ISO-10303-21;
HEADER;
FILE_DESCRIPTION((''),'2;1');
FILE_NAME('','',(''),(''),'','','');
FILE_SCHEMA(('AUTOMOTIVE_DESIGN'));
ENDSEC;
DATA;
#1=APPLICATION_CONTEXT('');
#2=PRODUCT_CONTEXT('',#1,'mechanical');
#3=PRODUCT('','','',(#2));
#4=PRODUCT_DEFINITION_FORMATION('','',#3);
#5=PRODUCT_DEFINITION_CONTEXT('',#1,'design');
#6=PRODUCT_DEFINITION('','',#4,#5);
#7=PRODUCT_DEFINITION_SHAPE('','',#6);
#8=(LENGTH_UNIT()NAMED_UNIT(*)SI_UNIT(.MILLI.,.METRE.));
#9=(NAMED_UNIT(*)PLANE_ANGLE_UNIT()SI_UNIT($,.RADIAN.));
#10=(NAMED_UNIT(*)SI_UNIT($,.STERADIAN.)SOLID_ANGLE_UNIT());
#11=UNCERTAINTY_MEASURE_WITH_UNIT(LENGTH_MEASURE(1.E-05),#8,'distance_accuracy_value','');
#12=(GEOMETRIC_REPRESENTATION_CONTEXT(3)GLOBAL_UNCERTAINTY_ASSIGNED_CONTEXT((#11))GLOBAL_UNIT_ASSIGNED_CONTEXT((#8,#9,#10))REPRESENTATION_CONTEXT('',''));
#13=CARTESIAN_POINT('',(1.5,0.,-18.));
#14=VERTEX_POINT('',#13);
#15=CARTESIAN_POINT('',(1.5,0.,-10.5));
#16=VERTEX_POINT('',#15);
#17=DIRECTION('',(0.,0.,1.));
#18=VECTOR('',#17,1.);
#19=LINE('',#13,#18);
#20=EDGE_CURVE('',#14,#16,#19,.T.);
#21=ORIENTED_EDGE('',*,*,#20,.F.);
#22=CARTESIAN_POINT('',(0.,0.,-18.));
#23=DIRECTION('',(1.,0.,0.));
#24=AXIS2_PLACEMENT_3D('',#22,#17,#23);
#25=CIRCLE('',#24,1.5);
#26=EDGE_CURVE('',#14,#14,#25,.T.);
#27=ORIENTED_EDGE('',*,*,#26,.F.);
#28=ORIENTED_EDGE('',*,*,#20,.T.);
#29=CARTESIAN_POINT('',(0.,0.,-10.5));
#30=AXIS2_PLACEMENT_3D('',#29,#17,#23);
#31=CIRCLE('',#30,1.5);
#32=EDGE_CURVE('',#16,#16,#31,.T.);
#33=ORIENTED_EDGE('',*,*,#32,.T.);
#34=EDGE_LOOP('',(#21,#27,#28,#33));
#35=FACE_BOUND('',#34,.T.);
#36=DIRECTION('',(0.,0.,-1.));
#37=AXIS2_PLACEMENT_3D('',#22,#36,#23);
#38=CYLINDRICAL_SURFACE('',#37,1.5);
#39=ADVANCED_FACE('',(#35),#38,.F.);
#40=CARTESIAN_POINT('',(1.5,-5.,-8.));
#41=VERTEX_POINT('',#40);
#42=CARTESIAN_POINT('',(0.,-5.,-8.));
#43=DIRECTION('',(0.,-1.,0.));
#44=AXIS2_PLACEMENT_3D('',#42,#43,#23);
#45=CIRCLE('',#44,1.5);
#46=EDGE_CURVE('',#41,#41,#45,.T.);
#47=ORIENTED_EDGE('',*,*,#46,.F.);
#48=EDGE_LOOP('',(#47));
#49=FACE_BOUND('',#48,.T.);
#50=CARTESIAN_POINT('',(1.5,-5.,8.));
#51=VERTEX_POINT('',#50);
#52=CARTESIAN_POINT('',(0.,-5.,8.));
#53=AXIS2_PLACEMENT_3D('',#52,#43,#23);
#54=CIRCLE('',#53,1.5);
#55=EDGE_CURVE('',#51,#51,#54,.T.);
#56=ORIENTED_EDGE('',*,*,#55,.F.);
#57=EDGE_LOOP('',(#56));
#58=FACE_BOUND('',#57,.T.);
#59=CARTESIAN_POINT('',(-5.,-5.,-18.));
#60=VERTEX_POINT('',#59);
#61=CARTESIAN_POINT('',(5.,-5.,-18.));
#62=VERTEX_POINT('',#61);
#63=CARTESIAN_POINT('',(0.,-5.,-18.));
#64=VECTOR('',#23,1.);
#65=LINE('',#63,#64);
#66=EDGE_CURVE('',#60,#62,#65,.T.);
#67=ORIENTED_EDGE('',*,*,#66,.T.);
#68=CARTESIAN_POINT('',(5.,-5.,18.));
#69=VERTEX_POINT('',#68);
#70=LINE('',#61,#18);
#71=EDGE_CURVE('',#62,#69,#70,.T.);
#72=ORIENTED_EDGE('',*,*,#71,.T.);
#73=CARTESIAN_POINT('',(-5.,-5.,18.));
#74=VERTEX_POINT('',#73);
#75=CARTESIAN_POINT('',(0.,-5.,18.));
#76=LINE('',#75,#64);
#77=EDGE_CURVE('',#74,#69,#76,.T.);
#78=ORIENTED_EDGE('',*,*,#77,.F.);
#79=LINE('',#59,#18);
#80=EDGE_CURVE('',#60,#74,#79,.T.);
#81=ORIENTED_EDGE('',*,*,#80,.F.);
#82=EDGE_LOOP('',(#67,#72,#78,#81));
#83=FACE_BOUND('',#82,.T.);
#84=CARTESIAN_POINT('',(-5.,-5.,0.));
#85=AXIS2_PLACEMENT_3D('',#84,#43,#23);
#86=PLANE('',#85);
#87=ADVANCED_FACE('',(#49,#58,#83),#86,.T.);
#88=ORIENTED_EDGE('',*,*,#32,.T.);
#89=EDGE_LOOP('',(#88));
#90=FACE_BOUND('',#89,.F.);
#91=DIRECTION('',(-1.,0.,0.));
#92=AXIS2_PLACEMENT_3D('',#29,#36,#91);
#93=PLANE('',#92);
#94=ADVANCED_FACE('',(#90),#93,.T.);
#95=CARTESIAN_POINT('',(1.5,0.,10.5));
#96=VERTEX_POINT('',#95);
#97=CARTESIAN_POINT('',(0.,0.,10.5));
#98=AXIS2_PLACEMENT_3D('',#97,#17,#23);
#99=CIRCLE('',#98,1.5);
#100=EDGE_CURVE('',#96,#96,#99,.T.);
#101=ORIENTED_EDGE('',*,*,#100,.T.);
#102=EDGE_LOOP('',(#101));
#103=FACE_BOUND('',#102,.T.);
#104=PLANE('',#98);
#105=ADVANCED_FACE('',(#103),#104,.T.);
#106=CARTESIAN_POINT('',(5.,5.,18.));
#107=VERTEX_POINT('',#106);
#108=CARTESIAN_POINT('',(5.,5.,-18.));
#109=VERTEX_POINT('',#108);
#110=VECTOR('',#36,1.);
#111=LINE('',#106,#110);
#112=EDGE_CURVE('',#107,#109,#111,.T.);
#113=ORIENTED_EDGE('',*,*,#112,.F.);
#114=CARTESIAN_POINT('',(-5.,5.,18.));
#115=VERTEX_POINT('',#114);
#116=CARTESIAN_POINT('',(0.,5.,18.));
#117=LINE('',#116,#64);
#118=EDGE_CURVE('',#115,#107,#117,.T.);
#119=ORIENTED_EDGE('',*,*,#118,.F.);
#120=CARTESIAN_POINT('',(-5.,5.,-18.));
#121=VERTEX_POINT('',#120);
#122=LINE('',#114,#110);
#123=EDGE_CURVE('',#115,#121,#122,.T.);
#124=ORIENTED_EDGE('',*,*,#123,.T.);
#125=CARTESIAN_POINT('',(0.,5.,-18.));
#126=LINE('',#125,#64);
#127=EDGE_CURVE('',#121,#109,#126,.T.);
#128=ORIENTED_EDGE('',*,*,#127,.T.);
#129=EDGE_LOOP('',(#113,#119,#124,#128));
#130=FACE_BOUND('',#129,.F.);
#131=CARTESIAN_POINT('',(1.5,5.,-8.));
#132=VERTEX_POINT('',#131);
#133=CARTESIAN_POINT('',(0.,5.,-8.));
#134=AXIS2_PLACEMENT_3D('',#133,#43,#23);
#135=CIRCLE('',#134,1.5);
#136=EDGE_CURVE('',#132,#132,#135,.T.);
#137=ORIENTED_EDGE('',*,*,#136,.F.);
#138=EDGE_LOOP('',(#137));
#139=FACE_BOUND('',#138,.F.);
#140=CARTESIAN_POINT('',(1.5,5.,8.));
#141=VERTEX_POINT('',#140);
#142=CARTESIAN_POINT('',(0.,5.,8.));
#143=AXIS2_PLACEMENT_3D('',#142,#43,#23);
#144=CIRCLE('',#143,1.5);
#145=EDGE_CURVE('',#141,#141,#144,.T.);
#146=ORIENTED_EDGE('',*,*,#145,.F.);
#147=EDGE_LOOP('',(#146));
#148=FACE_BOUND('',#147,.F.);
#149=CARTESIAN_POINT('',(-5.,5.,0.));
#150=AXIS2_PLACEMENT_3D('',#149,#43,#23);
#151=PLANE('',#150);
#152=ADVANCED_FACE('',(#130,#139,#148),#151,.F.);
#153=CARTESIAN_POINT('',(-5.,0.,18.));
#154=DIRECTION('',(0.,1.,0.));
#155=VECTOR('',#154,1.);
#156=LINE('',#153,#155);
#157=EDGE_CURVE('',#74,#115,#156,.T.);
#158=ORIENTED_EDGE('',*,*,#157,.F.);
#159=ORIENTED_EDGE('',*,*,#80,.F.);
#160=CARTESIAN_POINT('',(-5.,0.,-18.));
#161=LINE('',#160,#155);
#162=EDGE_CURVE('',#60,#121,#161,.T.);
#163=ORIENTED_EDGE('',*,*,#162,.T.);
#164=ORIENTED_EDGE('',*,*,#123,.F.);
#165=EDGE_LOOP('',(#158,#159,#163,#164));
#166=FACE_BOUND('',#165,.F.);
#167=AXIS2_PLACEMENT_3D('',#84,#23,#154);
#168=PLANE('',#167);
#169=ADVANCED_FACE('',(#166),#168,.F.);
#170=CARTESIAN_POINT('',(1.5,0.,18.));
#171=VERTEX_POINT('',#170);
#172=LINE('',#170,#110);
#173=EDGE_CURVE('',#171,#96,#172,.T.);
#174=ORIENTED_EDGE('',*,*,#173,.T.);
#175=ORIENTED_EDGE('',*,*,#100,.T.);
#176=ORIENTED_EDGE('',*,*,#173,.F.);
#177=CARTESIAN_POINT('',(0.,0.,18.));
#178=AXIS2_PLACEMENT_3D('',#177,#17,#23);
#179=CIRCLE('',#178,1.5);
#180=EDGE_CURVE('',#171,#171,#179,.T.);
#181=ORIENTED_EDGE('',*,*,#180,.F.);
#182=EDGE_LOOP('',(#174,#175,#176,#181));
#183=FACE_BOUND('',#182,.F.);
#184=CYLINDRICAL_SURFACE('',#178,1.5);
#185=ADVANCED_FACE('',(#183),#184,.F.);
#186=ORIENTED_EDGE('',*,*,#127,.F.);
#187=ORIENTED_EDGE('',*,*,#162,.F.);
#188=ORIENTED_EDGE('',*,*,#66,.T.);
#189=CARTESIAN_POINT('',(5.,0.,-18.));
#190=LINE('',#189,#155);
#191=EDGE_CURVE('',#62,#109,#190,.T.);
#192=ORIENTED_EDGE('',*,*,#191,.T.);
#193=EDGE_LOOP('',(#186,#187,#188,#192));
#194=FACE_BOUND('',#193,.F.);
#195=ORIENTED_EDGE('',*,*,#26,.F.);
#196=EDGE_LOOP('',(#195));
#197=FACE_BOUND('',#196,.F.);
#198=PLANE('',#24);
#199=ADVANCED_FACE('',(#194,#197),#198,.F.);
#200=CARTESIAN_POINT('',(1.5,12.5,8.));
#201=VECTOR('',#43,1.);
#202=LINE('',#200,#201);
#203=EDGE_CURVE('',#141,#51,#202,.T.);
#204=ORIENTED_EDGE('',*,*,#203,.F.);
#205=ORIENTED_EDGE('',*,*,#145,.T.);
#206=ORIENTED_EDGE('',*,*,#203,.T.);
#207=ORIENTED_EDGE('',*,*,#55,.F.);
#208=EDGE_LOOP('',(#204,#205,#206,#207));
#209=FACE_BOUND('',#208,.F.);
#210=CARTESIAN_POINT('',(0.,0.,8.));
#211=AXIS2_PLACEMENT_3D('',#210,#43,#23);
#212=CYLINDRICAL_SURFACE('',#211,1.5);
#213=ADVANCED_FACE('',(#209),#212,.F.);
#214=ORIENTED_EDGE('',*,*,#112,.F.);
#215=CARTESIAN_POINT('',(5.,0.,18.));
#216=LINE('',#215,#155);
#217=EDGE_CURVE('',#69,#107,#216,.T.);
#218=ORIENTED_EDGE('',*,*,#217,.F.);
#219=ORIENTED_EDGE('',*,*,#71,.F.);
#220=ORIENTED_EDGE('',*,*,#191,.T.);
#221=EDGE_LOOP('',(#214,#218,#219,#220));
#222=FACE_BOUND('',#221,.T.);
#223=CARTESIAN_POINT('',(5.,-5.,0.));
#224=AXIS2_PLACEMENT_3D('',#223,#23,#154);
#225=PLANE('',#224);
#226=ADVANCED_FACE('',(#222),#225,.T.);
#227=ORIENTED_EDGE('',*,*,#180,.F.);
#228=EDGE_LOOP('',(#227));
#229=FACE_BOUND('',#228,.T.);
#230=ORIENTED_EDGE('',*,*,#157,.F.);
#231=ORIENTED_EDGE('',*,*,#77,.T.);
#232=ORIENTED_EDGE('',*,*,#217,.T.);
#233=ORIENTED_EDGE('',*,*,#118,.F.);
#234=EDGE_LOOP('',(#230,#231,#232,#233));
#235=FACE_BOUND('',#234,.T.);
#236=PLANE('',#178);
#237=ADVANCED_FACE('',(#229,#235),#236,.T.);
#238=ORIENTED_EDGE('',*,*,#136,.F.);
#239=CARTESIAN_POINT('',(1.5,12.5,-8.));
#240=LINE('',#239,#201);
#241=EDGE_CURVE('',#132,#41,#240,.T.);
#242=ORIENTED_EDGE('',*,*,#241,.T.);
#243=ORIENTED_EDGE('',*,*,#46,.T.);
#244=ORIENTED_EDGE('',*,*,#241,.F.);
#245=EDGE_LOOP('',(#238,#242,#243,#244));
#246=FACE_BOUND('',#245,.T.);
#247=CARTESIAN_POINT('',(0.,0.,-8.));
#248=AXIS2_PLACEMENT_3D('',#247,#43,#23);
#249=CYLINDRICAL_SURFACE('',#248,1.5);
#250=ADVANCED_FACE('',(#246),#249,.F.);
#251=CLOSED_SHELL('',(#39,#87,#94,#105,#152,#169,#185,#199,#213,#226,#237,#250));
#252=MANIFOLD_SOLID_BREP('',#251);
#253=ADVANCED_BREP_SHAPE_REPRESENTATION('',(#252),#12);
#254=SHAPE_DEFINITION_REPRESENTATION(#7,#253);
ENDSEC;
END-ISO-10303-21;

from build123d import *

# Parameters (mm, degrees)
F0_W     = 10
F0_H     = 10
F1_DEPTH = 18
F2_R     = 1.5
F3_DEPTH = 7.5
F4_R     = 1.5
F5_DEPTH = 12.5


# Not quite as in the source:
# - a pattern or mirror of a feature is missing from the dataset's text; its kind, count and spacing are read off the source's solid


with BuildPart() as f1:
    # F0 (on Top) → F1 (new body, symmetric)
    with BuildSketch(Plane.XY):
        Rectangle(F0_W, F0_H)
    extrude(amount=F1_DEPTH, both=True)

    # F2 (on face) → F3 (cut)
    with BuildSketch(Plane.XY.offset(18)):
        Circle(F2_R)
    f3 = extrude(amount=-F3_DEPTH, mode=Mode.SUBTRACT)

    # F3_copies: F3 across plane
    add(f3.mirror(Plane(origin=(0, 0, 0), x_dir=(-1, 0, 0), z_dir=(0, 0, -1))), mode=Mode.SUBTRACT)

    # F4 (on Front) → F5 (cut, symmetric)
    with BuildSketch(Plane.XZ):
        with Locations((0, 8)):
            Circle(F4_R)
    f5 = extrude(amount=F5_DEPTH, both=True, mode=Mode.SUBTRACT)

    # F5_copies: F5 across plane
    add(f5.mirror(Plane(origin=(0, 0, 0), x_dir=(-1, 0, 0), z_dir=(0, 0, -1))), mode=Mode.SUBTRACT)


solid = f1.part
